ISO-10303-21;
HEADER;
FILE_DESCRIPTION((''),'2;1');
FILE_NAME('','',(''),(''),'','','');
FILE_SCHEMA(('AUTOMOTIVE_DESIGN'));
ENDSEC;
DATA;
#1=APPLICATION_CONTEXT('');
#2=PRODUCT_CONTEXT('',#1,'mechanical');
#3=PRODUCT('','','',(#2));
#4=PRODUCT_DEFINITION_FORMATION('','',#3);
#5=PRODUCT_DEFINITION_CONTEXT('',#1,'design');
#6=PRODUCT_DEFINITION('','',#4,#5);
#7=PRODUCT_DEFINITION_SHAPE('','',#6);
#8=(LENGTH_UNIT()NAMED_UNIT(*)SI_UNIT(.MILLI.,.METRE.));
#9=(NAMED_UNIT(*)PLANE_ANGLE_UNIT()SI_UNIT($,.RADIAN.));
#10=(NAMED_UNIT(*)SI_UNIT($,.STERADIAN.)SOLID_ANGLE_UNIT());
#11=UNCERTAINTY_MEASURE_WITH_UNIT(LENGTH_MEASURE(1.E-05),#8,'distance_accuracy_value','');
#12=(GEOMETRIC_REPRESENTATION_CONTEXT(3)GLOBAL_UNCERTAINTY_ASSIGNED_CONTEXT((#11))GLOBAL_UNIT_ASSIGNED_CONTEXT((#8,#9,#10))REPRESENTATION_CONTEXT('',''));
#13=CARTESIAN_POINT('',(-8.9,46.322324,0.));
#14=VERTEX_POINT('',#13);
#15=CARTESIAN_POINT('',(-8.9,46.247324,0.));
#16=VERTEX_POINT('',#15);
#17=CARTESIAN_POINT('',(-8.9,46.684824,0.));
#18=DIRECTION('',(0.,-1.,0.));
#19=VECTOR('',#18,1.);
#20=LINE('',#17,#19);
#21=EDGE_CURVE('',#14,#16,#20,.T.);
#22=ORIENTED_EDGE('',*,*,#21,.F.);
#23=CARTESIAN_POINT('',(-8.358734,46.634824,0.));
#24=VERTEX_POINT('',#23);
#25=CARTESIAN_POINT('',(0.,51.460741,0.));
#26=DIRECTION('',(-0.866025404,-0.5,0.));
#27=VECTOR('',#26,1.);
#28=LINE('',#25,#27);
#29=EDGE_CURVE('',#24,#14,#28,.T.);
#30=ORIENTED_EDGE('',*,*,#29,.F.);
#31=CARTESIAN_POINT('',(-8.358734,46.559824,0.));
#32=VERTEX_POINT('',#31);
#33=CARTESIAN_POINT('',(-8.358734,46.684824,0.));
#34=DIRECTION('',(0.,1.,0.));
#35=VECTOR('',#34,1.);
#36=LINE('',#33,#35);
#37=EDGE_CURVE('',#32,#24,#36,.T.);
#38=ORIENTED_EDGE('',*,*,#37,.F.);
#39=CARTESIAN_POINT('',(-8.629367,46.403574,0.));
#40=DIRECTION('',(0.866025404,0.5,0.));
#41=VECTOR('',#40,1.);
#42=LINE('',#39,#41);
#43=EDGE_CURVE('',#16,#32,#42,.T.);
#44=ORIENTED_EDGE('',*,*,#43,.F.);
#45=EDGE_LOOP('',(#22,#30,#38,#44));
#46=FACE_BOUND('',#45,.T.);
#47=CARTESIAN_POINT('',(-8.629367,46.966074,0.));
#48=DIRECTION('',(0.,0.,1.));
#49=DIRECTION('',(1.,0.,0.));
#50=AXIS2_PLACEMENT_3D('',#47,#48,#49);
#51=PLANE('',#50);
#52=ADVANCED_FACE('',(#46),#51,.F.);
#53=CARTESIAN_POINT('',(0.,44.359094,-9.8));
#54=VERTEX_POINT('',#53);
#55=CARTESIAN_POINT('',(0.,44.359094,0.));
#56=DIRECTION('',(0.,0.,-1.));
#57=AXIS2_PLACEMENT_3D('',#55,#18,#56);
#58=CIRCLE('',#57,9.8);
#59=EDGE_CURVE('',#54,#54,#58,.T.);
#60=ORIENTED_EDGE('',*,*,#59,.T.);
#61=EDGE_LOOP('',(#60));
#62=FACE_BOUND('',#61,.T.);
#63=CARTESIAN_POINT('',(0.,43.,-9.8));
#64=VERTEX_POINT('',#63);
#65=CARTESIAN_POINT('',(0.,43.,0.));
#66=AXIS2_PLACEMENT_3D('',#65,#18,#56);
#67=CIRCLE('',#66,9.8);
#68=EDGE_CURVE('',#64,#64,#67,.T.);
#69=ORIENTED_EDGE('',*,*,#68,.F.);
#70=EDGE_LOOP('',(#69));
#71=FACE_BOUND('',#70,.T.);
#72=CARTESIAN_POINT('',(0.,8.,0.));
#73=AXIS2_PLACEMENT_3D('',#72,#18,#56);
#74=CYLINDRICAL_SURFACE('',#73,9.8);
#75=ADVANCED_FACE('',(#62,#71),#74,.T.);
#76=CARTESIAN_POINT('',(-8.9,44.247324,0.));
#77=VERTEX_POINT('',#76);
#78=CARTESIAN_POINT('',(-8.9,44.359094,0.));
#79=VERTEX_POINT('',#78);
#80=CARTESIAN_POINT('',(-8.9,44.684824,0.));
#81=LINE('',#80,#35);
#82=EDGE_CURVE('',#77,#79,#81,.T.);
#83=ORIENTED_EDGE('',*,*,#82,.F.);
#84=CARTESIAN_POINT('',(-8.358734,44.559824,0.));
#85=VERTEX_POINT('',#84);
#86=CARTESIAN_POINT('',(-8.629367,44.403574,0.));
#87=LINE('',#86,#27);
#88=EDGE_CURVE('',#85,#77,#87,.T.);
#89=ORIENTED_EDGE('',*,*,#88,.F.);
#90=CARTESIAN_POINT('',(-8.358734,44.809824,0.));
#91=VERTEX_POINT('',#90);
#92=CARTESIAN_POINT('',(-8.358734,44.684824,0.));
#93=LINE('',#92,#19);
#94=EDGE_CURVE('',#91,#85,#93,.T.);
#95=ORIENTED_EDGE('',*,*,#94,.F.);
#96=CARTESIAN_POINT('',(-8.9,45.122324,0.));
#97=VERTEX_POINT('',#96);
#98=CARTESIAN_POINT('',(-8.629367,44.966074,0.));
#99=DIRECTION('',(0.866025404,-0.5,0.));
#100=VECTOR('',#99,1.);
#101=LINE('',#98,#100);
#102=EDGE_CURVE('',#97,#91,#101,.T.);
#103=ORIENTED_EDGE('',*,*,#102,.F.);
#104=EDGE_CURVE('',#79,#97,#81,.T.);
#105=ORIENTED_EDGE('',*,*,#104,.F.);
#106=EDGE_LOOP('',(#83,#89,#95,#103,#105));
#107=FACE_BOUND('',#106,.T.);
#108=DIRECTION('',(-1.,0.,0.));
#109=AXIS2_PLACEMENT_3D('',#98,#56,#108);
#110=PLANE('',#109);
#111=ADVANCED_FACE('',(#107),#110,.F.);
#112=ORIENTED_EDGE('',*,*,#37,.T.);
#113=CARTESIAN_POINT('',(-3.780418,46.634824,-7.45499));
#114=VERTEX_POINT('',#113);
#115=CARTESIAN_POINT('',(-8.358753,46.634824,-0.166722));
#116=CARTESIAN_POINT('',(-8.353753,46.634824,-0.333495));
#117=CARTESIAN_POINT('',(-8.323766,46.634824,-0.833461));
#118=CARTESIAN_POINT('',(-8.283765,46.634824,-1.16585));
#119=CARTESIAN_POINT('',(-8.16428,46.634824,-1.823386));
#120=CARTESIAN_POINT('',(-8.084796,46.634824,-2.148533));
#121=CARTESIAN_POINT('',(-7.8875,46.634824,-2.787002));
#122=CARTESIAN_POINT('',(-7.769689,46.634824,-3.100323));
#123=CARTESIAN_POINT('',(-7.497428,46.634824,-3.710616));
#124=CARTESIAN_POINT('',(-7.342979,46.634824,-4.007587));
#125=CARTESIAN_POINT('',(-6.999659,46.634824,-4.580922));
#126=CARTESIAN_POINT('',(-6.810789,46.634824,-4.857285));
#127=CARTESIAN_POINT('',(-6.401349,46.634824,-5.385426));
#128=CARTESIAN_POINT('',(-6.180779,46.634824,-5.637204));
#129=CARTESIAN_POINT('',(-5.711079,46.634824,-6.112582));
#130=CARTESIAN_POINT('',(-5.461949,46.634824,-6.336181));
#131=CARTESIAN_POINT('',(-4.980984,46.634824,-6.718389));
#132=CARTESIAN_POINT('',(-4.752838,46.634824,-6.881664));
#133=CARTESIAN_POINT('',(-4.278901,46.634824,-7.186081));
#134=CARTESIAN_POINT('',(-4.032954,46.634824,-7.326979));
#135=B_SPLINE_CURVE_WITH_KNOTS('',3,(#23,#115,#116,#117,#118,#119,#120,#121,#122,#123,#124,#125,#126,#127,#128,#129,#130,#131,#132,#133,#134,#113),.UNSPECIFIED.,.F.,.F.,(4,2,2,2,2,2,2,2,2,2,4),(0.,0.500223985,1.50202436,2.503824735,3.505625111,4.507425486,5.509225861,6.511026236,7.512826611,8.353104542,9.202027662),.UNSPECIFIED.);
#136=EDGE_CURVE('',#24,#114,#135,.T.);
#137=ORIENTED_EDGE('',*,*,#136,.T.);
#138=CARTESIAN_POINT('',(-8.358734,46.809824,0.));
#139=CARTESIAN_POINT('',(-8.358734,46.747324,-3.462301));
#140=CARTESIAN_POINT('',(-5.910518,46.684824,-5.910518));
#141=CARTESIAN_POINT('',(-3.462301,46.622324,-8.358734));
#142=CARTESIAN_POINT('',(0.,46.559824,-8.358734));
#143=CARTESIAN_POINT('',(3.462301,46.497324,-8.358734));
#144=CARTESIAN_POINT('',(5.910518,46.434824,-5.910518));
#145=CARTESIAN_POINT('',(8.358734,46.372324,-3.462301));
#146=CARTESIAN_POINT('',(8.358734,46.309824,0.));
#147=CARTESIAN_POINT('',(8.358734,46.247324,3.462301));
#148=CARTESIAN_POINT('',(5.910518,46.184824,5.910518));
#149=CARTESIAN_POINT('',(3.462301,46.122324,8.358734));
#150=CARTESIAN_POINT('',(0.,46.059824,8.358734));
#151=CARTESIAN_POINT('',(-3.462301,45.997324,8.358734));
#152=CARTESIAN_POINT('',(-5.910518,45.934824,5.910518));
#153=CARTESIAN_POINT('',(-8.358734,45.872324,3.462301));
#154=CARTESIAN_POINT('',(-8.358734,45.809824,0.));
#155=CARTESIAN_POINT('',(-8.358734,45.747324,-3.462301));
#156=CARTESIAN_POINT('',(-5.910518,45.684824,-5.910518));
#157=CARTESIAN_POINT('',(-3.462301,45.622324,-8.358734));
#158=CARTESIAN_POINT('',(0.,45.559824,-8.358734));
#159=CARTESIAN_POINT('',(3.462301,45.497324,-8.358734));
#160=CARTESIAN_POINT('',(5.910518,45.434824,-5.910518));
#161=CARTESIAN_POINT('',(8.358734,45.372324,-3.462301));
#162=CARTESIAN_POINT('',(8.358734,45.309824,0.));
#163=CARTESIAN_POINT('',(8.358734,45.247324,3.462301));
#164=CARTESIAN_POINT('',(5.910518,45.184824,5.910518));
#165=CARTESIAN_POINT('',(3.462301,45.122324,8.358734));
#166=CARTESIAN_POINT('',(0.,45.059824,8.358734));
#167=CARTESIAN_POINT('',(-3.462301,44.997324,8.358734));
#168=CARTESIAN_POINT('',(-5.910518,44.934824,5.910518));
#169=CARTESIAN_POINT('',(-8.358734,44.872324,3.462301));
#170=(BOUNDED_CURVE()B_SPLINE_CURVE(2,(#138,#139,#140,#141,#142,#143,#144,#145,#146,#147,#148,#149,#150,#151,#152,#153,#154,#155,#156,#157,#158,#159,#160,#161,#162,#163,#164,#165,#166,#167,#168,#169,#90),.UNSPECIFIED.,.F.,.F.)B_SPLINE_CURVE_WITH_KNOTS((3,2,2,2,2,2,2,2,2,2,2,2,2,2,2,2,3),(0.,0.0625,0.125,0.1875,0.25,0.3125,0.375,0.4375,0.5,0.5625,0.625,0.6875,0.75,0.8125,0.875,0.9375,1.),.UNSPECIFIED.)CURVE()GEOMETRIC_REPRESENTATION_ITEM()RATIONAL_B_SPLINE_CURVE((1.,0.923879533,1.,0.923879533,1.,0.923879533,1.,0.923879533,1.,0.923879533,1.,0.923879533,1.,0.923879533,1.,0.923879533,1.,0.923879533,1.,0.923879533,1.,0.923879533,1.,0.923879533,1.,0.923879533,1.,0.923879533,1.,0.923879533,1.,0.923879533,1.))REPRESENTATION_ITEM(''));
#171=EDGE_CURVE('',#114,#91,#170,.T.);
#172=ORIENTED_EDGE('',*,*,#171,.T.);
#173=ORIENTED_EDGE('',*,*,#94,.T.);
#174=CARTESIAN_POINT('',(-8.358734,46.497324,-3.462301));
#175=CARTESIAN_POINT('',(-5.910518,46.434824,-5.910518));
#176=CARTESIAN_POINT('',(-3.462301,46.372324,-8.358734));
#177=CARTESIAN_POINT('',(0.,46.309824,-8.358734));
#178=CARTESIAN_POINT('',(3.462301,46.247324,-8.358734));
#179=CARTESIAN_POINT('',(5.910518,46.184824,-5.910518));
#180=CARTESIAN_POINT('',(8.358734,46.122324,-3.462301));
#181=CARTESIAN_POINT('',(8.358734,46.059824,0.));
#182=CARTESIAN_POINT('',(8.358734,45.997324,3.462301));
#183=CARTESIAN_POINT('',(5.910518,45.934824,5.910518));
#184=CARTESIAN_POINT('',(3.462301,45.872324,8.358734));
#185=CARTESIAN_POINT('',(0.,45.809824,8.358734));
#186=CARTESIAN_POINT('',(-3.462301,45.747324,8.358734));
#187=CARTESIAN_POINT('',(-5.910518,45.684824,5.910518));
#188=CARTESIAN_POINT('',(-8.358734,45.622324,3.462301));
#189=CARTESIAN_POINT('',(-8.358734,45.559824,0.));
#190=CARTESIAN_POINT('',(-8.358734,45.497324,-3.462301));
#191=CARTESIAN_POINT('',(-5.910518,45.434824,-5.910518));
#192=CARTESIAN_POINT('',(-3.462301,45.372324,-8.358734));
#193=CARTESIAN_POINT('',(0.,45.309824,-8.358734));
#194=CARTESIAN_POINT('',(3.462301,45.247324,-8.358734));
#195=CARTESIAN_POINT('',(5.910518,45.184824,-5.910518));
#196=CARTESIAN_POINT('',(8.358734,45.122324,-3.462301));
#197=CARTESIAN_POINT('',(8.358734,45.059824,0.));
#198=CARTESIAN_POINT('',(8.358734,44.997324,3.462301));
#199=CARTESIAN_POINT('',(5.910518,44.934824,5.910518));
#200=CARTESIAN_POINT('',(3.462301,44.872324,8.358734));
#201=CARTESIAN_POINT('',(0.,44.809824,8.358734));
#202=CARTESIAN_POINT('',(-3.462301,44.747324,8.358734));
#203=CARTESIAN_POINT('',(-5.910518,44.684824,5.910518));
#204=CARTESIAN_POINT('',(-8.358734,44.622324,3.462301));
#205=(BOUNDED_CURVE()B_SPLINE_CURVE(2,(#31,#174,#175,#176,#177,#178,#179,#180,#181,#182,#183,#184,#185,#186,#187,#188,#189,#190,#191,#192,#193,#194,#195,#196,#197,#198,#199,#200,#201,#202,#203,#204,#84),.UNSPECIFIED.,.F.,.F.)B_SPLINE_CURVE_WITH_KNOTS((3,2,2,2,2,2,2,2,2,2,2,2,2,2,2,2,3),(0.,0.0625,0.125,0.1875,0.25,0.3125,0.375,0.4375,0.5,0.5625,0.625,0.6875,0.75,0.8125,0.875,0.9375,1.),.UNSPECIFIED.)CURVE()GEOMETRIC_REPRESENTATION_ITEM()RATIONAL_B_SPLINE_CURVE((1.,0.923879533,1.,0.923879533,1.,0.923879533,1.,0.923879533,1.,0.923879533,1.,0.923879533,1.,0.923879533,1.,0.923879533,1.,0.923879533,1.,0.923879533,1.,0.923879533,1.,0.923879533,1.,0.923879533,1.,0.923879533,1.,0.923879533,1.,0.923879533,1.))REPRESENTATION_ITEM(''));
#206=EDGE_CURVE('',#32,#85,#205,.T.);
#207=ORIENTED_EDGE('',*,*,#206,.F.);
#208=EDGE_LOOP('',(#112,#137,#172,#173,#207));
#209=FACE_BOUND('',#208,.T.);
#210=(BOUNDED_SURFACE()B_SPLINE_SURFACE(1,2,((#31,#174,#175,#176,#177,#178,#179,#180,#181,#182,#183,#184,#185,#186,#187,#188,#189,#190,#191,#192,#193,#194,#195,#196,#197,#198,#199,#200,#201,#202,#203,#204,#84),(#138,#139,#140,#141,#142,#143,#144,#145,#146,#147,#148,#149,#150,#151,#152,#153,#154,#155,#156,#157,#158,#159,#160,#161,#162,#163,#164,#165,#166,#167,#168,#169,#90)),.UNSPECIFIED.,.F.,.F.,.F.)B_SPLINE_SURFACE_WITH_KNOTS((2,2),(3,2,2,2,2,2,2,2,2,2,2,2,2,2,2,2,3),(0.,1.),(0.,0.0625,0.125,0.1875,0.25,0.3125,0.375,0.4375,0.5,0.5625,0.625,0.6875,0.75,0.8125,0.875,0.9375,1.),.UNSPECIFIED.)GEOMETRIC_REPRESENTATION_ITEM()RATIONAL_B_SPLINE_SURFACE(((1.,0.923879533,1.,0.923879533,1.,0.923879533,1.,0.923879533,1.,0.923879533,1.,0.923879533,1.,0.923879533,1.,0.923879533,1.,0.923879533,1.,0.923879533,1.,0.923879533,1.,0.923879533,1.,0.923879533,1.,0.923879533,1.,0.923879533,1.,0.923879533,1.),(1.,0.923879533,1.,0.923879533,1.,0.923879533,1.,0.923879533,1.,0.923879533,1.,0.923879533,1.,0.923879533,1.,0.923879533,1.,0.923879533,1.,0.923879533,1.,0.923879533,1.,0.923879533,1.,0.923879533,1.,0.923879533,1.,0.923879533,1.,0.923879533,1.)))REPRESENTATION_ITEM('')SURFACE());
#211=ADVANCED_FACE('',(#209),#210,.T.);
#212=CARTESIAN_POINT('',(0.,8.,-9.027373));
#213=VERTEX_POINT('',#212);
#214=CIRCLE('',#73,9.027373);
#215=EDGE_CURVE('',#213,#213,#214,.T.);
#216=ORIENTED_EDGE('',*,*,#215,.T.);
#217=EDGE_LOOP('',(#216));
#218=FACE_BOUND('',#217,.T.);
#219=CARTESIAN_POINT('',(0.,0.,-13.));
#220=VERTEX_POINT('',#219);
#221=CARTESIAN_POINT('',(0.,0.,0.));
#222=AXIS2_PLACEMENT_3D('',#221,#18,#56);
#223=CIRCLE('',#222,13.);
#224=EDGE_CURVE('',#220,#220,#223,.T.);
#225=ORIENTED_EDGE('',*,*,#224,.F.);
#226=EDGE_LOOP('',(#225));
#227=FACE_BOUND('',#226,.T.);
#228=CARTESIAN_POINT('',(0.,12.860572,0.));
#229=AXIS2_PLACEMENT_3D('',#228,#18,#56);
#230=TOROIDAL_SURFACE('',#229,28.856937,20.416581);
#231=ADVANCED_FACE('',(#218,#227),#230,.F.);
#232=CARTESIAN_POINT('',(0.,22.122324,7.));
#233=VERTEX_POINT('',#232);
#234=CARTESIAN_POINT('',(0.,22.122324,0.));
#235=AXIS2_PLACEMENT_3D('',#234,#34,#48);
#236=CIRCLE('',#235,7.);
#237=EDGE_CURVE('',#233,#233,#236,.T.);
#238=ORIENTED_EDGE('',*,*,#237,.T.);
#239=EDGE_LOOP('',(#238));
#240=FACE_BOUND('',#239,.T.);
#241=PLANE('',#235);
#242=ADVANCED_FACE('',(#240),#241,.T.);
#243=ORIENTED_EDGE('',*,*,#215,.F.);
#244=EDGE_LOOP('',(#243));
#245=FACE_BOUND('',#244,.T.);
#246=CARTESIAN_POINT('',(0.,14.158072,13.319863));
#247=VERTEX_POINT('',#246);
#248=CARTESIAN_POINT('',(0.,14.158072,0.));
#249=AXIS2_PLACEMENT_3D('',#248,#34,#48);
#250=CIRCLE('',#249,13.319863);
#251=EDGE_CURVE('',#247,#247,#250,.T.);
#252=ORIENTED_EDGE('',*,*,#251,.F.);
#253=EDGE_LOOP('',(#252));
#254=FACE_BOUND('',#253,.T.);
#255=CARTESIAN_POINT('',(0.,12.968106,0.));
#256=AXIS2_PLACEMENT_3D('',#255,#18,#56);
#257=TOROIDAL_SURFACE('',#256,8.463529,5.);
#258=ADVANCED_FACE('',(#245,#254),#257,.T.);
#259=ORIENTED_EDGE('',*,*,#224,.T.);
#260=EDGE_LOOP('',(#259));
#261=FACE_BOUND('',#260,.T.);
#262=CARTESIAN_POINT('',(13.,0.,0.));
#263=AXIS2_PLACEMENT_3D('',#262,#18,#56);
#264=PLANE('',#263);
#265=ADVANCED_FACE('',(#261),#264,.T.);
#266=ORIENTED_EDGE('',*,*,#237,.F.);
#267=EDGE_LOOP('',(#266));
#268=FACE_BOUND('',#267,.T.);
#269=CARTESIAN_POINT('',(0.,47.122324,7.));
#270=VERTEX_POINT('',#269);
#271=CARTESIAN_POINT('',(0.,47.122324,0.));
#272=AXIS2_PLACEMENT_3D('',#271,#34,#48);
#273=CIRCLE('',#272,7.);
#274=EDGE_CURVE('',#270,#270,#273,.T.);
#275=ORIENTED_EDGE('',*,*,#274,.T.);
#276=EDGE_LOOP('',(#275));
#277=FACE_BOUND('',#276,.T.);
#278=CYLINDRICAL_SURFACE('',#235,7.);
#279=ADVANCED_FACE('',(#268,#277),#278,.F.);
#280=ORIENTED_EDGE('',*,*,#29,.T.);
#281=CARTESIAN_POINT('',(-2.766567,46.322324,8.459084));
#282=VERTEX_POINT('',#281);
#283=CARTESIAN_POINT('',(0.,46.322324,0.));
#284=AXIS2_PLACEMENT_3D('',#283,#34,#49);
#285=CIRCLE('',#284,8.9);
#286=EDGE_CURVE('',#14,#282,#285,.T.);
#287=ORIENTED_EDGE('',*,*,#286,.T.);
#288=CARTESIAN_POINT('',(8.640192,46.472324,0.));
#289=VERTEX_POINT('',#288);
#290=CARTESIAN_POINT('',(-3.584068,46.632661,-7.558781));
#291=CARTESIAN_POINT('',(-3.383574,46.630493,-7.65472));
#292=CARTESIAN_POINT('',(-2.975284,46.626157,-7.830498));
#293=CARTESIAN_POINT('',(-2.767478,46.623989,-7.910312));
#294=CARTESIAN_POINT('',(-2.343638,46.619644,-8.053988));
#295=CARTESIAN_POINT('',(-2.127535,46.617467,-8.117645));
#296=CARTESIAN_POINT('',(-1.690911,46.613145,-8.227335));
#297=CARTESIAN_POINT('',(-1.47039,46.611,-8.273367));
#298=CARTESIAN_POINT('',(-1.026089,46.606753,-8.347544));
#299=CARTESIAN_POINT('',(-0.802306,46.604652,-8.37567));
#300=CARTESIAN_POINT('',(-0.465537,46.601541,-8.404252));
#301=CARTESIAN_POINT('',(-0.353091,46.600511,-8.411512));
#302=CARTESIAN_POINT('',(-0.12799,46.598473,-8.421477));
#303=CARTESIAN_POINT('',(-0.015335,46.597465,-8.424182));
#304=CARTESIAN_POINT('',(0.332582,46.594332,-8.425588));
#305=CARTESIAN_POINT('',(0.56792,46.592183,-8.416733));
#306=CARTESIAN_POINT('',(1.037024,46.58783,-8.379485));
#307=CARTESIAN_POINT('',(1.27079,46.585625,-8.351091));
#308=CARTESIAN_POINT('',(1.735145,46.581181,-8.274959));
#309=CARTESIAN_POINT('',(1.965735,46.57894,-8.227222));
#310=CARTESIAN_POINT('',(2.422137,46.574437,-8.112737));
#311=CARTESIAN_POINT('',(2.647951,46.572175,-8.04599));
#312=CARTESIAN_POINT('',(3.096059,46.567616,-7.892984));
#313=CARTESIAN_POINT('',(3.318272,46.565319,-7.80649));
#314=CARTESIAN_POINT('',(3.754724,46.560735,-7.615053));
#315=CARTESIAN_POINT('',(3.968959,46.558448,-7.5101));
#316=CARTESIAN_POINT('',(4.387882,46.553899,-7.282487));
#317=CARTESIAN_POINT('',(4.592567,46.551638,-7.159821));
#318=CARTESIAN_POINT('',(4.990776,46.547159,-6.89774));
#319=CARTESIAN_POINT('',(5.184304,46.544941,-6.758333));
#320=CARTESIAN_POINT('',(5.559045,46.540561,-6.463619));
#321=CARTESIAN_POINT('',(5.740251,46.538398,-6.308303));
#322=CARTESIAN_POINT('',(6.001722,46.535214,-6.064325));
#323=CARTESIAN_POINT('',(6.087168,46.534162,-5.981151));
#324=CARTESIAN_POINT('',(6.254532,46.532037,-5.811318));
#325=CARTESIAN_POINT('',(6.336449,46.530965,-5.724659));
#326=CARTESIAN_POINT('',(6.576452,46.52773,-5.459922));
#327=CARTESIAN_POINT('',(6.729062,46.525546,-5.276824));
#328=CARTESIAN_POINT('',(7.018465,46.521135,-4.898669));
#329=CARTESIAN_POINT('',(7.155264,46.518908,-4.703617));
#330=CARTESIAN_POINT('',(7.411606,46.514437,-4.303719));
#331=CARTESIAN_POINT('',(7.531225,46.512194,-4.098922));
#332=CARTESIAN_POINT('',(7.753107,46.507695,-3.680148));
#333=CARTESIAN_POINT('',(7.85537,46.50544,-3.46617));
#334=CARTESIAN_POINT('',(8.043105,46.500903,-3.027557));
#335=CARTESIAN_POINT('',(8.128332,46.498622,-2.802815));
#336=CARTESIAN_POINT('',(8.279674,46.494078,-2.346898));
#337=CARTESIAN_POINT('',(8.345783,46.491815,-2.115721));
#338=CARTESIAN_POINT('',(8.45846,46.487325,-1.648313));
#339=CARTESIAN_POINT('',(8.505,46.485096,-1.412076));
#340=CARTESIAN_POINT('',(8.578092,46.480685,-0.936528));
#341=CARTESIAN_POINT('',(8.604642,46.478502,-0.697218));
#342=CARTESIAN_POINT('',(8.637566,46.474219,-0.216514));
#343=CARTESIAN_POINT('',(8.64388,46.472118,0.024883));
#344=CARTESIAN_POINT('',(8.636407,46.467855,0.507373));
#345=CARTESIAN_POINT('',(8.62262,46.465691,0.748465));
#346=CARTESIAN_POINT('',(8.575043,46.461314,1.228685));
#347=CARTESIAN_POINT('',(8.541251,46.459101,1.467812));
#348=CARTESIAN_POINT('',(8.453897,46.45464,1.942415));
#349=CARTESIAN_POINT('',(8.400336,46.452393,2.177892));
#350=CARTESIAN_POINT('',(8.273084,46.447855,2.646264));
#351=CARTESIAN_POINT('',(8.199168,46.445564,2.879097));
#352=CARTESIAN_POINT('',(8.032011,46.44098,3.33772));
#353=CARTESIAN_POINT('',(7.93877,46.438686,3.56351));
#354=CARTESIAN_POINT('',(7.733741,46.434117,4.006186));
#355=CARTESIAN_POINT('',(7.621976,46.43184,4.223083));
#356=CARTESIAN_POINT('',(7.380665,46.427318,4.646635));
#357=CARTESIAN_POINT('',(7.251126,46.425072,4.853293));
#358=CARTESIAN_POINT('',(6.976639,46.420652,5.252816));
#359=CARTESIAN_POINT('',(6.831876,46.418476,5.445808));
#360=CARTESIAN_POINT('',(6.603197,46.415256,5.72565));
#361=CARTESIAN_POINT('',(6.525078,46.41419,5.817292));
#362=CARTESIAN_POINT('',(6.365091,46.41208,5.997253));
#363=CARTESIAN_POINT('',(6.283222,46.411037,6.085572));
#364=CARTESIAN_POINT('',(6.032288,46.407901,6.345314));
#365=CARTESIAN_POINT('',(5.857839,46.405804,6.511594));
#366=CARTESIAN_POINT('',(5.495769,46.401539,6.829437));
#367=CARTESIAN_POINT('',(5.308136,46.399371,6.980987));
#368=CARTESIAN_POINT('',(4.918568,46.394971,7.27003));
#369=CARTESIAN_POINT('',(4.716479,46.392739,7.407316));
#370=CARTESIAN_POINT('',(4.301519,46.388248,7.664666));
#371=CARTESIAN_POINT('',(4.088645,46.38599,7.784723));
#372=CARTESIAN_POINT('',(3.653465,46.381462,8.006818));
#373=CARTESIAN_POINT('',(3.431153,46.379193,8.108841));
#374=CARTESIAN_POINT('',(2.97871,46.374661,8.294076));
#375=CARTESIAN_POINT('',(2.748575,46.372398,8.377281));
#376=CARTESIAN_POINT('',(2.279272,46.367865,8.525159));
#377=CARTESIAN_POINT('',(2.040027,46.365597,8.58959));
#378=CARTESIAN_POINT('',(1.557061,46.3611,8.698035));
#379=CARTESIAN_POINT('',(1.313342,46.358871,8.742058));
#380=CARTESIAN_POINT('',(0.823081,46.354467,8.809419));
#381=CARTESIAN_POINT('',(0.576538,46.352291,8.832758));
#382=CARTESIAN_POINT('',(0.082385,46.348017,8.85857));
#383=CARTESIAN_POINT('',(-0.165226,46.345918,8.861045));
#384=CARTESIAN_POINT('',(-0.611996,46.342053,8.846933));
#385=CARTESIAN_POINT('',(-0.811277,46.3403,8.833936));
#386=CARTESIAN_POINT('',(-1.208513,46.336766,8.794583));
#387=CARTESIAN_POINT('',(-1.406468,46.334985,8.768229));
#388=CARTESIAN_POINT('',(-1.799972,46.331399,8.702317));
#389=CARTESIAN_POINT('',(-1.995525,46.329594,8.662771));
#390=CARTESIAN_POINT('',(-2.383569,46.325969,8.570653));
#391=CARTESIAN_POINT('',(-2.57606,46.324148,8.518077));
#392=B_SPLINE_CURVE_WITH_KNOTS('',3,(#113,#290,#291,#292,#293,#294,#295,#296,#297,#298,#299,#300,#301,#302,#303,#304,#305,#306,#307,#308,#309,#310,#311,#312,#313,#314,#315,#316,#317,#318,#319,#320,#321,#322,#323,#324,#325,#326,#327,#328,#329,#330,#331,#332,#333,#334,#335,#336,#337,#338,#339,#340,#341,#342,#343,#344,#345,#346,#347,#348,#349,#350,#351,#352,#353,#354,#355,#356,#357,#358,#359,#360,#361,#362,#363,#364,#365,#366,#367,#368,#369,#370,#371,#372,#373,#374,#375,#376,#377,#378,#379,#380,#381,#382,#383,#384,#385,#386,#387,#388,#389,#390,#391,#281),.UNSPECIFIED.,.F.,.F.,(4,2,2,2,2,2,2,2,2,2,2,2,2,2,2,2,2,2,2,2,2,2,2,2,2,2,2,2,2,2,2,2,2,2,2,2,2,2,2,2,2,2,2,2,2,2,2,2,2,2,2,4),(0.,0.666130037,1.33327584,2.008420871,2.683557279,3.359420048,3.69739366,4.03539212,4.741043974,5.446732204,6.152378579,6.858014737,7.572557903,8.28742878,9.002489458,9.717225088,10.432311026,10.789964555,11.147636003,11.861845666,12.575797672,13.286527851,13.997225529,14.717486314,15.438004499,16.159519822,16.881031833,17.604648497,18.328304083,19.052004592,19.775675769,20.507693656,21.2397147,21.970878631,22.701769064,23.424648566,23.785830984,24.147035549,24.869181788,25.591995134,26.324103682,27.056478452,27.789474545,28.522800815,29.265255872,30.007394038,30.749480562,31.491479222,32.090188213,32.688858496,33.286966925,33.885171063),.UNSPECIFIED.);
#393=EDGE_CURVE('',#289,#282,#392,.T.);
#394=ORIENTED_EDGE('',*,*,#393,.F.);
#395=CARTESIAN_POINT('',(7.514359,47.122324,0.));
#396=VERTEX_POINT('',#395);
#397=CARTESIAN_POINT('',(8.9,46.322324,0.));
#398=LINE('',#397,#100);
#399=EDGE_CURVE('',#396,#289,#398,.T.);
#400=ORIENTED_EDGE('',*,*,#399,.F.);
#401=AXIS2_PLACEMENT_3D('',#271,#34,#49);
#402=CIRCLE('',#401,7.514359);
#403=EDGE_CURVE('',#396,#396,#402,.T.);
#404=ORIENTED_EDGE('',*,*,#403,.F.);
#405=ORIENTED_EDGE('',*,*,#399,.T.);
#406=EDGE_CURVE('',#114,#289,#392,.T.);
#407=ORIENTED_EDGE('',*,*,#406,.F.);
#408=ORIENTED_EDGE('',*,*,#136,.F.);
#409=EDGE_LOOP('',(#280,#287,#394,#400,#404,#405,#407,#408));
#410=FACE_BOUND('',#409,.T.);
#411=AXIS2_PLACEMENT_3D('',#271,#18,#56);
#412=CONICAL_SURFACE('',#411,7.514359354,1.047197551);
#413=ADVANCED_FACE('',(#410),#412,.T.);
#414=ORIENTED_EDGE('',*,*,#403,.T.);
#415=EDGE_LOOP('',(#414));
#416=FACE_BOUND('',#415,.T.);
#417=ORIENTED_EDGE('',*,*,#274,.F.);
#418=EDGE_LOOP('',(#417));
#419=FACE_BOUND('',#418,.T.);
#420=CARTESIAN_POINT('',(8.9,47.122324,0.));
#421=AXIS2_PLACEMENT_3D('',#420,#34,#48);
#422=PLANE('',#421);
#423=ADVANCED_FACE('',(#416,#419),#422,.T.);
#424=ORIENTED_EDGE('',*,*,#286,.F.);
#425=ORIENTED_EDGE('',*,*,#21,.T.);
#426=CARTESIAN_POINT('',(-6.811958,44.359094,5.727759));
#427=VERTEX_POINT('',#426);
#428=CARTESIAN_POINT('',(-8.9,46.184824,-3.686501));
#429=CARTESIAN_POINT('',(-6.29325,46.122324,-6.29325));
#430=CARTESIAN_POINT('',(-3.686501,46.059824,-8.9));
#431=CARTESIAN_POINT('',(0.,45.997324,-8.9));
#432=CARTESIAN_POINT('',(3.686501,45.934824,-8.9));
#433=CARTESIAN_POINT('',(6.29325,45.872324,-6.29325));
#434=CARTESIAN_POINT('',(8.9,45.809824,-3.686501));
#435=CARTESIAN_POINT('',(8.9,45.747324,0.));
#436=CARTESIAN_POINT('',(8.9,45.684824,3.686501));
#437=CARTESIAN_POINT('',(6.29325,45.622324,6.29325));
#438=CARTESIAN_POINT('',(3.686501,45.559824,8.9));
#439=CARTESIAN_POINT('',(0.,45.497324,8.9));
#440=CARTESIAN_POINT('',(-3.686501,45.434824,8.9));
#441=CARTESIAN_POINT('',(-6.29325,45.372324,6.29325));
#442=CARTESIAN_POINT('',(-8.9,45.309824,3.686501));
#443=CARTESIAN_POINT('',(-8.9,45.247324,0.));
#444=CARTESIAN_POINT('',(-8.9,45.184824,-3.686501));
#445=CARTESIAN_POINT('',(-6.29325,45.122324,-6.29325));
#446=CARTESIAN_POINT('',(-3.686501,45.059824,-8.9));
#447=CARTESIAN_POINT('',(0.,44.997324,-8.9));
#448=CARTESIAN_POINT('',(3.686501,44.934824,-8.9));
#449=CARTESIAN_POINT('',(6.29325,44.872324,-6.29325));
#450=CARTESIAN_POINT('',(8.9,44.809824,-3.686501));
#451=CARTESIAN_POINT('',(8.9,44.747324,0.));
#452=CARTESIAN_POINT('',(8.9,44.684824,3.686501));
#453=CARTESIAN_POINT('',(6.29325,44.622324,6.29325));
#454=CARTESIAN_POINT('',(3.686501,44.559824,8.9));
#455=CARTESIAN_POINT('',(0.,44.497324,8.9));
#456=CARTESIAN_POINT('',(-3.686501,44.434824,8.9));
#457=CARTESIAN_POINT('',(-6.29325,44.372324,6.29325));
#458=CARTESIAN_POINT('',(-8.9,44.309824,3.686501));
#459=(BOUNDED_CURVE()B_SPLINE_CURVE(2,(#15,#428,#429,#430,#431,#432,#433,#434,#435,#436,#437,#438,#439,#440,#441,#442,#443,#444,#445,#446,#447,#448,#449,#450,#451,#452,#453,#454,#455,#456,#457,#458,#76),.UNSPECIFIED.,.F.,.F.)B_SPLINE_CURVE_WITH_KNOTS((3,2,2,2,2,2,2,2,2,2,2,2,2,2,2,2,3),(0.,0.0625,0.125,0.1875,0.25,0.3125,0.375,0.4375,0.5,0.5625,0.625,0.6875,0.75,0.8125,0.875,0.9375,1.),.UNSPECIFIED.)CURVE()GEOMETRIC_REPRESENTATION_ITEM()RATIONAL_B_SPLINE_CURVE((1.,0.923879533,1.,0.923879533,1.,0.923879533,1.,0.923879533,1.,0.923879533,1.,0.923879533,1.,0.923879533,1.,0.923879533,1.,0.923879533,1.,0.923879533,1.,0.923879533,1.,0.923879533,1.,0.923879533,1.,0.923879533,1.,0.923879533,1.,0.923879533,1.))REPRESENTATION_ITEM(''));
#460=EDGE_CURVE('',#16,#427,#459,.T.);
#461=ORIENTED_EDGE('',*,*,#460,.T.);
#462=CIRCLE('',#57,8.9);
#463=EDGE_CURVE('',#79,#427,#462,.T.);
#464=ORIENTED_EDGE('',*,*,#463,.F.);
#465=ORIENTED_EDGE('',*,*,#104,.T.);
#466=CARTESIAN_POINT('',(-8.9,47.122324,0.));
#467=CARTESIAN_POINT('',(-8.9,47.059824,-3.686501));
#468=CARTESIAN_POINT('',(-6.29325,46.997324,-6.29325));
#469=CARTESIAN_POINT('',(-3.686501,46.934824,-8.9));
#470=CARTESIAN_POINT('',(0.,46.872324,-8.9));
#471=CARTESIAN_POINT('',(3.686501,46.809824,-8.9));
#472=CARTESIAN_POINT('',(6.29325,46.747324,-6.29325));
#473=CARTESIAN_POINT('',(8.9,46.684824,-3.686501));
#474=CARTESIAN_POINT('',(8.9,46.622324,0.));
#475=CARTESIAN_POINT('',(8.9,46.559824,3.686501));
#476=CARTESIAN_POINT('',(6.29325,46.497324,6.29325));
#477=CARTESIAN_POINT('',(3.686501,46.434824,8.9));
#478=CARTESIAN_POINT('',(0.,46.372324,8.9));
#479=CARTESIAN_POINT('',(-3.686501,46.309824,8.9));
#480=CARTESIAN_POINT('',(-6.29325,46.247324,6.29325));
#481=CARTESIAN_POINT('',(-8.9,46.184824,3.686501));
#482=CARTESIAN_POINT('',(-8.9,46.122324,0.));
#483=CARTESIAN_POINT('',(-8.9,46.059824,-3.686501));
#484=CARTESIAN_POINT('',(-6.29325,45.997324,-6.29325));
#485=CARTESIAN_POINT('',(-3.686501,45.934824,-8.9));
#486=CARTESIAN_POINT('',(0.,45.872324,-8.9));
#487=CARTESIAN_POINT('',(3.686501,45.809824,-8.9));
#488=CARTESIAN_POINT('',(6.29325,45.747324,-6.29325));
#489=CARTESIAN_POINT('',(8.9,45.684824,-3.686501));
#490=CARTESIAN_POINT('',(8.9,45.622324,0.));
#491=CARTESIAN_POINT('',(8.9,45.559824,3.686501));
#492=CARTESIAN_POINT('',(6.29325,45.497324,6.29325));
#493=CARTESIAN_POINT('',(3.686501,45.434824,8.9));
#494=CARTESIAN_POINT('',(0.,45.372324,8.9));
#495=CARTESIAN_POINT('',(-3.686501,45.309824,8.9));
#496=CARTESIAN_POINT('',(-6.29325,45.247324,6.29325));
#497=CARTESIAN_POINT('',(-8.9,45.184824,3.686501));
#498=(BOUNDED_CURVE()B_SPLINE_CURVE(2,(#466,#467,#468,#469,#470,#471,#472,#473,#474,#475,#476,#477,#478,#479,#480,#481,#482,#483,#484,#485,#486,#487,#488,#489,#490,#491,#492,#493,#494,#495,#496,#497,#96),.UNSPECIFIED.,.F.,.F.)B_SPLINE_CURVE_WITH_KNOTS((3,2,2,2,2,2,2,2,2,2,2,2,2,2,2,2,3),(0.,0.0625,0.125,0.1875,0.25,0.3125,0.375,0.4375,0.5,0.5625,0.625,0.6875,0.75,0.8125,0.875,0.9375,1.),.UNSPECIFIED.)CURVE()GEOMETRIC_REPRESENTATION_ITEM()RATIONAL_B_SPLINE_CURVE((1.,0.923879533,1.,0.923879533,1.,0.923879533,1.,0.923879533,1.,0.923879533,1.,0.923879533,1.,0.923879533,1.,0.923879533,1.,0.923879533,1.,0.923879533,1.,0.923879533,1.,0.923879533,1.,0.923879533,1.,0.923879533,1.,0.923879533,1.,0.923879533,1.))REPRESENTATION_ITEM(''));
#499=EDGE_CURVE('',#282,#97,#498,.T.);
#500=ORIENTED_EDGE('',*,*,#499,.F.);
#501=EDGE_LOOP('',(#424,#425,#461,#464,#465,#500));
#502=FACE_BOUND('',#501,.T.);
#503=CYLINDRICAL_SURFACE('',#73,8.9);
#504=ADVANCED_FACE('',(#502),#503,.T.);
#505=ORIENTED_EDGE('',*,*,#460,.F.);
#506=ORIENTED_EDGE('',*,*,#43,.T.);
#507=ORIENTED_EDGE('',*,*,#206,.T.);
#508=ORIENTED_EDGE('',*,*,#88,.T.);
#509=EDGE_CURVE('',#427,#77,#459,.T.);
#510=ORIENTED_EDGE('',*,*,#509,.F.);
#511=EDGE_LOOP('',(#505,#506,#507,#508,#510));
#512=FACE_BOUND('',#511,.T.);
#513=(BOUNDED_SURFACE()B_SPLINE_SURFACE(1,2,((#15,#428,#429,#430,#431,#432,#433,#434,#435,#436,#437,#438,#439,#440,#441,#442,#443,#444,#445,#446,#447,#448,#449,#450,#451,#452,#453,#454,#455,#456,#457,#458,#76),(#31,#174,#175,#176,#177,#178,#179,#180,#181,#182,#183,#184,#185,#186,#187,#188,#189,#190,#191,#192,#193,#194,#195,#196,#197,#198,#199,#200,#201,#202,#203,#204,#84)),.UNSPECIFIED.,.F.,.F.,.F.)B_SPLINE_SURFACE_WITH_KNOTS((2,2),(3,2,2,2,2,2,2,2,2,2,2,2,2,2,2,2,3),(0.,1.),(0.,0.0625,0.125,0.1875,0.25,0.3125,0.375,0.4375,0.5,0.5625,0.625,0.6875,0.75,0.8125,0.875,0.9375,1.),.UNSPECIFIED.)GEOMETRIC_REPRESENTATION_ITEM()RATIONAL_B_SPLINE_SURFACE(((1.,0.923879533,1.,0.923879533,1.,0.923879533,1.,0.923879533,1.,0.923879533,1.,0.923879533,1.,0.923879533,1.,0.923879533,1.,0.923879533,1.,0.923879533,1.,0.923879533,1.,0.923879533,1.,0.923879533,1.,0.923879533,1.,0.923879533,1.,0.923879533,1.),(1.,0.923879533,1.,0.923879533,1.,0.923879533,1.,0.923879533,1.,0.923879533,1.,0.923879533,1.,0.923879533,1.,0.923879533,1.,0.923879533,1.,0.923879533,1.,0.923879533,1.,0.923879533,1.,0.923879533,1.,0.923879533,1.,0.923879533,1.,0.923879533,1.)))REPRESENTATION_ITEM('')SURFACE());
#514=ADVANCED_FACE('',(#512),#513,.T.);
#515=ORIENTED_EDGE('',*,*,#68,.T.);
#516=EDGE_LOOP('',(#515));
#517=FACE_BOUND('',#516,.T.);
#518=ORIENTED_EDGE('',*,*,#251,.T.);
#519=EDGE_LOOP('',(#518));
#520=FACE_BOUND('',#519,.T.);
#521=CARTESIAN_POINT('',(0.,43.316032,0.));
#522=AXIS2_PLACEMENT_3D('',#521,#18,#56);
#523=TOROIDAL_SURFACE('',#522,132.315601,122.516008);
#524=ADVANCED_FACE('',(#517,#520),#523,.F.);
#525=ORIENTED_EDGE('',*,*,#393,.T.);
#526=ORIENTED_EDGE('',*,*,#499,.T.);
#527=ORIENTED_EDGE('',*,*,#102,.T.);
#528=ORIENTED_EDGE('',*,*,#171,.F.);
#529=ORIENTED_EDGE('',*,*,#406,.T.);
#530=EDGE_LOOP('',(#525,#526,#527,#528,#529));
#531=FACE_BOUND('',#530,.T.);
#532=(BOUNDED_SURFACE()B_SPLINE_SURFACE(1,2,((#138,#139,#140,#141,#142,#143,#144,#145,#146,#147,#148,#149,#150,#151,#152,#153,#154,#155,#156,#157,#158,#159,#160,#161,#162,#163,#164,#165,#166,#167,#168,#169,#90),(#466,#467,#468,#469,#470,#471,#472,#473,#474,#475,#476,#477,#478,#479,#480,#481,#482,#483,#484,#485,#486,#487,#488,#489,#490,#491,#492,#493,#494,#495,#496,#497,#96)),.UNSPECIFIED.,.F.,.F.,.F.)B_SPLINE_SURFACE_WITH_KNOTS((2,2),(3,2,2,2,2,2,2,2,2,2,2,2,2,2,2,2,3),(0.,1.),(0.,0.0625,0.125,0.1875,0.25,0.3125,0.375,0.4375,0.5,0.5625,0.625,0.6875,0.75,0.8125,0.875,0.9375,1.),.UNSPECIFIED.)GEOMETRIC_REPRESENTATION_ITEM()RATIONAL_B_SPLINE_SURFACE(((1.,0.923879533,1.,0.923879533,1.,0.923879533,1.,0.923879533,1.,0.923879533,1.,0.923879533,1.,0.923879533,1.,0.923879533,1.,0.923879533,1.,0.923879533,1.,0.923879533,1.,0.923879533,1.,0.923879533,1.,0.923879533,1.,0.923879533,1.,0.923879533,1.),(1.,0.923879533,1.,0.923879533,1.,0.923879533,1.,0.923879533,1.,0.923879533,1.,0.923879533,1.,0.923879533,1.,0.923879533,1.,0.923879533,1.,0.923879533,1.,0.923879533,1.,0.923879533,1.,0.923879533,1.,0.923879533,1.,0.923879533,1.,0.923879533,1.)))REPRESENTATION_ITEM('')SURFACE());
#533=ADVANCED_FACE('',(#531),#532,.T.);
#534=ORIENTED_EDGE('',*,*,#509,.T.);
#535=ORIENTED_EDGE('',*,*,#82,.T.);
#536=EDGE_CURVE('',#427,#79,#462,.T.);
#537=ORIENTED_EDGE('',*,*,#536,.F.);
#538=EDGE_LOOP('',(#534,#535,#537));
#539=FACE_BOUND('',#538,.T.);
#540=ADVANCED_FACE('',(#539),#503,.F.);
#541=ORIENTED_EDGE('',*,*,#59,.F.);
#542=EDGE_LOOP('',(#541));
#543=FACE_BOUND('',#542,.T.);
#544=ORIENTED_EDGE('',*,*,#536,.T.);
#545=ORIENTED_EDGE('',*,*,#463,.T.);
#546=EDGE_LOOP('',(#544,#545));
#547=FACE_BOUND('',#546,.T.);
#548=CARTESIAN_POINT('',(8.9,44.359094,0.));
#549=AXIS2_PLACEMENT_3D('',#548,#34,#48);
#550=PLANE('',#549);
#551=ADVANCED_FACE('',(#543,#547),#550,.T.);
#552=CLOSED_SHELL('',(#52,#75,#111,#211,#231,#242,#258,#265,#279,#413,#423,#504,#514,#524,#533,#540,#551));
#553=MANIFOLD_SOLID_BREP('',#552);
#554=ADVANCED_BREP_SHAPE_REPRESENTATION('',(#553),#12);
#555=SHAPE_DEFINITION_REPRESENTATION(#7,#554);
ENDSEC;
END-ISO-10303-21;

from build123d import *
from build123d.topology import SkipClean

# Parameters (mm, degrees)
GWINT1_PITCH               = 1
SZKIC10_R                  = 7
WYTNIJ_WYCI_GNI_CIE2_DEPTH = 25
ZAOKR_GLENIE1_R            = 5


with BuildPart() as part:
    # Szkic2 → Obrót1 (revolve)
    with BuildSketch(Plane.XY, mode=Mode.PRIVATE) as obr_t1_sk:
        with BuildLine():
            Line((0, 0), (0, 8))
            Line((0, 8), (9.027373354, 8))
            ThreePointArc((9.027373354, 8), (10.570833484, 3.780088701), (13, 0))
            Line((13, 0), (0, 0))
        make_face()
    revolve(obr_t1_sk.sketch.rotate(Axis((0, 0, 0), (0, 1, 0)), 90), axis=Axis((0, 0, 0), (0, 1, 0)))

    # Szkic4 → Obrót2 (revolve)
    with BuildSketch(Plane.XY, mode=Mode.PRIVATE) as obr_t2_sk:
        with BuildLine():
            Line((0, 8), (0, 43))
            Line((0, 43), (0, 47.12232406))
            Line((0, 47.12232406), (8.9, 47.12232406))
            Line((8.9, 47.12232406), (8.9, 45.06116203))
            Line((8.9, 45.06116203), (8.9, 44.597825987))
            Line((8.9, 44.597825987), (8.9, 44.463010207))
            Line((8.9, 44.463010207), (8.9, 44.359094252))
            Line((8.9, 44.359094252), (9.8, 44.359094252))
            Line((9.8, 44.359094252), (9.8, 43))
            ThreePointArc((9.8, 43), (11.129787622, 25.311282732), (15, 8))
            Line((15, 8), (0, 8))
        make_face()
    revolve(obr_t2_sk.sketch.rotate(Axis((0, 8, 0), (0, 1, 0)), 90), axis=Axis((0, 8, 0), (0, 1, 0)))

    # Gwint1: the profile of Profil gwintu1 profile screwed along a right-hand helix of 2 turns, 8 arcs to a turn; built about Z, then put on its axis
    with SkipClean():  # the faces are left unmerged after this step: merging them gives an invalid solid
        gwint1_z = Axis((0, 0, 0), (0, 0, 1))
        gwint1_corners = [(8.9003, 0, -0.000173205), (8.9003, 0, 0.875173202), (8.358734125, 0, 0.562499998), (8.358734125, 0, 0.312499998)]
        with BuildLine(mode=Mode.PRIVATE) as gwint1_profile:
            Line(gwint1_corners[0], gwint1_corners[1])
            Line(gwint1_corners[1], gwint1_corners[2])
            Line(gwint1_corners[2], gwint1_corners[3])
            Line(gwint1_corners[3], gwint1_corners[0])
        gwint1_cap = Face(gwint1_profile.wire())
        gwint1_turn_angles = [0, 22.5, 45, 67.5, 90, 112.5, 135, 157.5, 180, 202.5, 225, 247.5, 270, 292.5, 315, 337.5, 360]
        gwint1_turn_weights = [1, 0.9238795325112867, 1, 0.9238795325112867, 1, 0.9238795325112867, 1, 0.9238795325112867, 1, 0.9238795325112867, 1, 0.9238795325112867, 1, 0.9238795325112867, 1, 0.9238795325112867, 1]
        gwint1_turn_rails = [Edge.make_bspline([Vector(p[0], p[1], 0).rotate(gwint1_z, gwint1_turn_angles[k]) / gwint1_turn_weights[k] + Vector(0, 0, p[2] + GWINT1_PITCH * gwint1_turn_angles[k] / 360) for k in range(17)], [0, 0, 0, 1, 1, 2, 2, 3, 3, 4, 4, 5, 5, 6, 6, 7, 7, 8, 8, 8], 2, gwint1_turn_weights) for p in gwint1_corners]
        gwint1_turn_sides = [Face.make_surface_from_curves(gwint1_turn_rails[p[0]], gwint1_turn_rails[p[1]]) for p in [(0, 1), (1, 2), (2, 3), (3, 0)]]
        gwint1 = Plane(origin=(0, 47.12232406, 0), x_dir=(-1, 0, 0), z_dir=(0, -1, 0)) * Solid(Shell([*[p.moved(Location((0, 0, GWINT1_PITCH * i))) for i in range(2) for p in gwint1_turn_sides], gwint1_cap, gwint1_cap.rotate(gwint1_z, 720).moved(Location((0, 0, GWINT1_PITCH * 720 / 360)))]))
        add(gwint1, mode=Mode.SUBTRACT)

    # Wycięcie-wyciągnięcie po ścieżce1: sweep along a path in Szkic8
    with BuildLine(Plane(origin=(0, 47.12232406, 0), x_dir=(1, 0, 0), z_dir=(0, 1, 0))) as wyci_cie_wyci_gni_cie_po_cie_ce1_path:
        CenterArc((0, 0), 13, 0, 360)
    # Szkic9 → Wycięcie-wyciągnięcie po ścieżce1 (sweep, cut)
    with BuildSketch(Plane.XY):
        Polygon((8.9, 47.12232406), (8.9, 46.32232406), (7.514359354, 47.12232406), align=None)
    sweep(path=wyci_cie_wyci_gni_cie_po_cie_ce1_path.line, mode=Mode.SUBTRACT)

    # Szkic10 → Wytnij-wyciągnięcie2 (cut)
    with BuildSketch(Plane(origin=(0, 47.12232406, 0), x_dir=(1, 0, 0), z_dir=(0, 1, 0))):
        with Locations(Location((0, 0, 0), (0, 0, 270))):
            Circle(SZKIC10_R)
    extrude(amount=-WYTNIJ_WYCI_GNI_CIE2_DEPTH, mode=Mode.SUBTRACT)

    # Zaokrąglenie1
    # the kernel refuses this fillet: 5 mm, written as the material it takes off along each edge
    with BuildSketch(Plane(origin=(0, 8, 0), x_dir=(0, 0, -1), z_dir=(1, 0, 0))) as zaokr_glenie1_piece_1:
        with BuildLine():
            CenterArc((8.463528587, 4.968106186), ZAOKR_GLENIE1_R, 276.47495836, 97.293161414)
            Line((9.027373354, 0), (15, 0))
            ThreePointArc((15, 0), (14.119819715, 3.068091884), (13.319862852, 6.158071522))
        make_face()
    revolve(axis=Axis((0, 8, 0), (0, 1, 0)), mode=Mode.SUBTRACT)


solid = part.part
